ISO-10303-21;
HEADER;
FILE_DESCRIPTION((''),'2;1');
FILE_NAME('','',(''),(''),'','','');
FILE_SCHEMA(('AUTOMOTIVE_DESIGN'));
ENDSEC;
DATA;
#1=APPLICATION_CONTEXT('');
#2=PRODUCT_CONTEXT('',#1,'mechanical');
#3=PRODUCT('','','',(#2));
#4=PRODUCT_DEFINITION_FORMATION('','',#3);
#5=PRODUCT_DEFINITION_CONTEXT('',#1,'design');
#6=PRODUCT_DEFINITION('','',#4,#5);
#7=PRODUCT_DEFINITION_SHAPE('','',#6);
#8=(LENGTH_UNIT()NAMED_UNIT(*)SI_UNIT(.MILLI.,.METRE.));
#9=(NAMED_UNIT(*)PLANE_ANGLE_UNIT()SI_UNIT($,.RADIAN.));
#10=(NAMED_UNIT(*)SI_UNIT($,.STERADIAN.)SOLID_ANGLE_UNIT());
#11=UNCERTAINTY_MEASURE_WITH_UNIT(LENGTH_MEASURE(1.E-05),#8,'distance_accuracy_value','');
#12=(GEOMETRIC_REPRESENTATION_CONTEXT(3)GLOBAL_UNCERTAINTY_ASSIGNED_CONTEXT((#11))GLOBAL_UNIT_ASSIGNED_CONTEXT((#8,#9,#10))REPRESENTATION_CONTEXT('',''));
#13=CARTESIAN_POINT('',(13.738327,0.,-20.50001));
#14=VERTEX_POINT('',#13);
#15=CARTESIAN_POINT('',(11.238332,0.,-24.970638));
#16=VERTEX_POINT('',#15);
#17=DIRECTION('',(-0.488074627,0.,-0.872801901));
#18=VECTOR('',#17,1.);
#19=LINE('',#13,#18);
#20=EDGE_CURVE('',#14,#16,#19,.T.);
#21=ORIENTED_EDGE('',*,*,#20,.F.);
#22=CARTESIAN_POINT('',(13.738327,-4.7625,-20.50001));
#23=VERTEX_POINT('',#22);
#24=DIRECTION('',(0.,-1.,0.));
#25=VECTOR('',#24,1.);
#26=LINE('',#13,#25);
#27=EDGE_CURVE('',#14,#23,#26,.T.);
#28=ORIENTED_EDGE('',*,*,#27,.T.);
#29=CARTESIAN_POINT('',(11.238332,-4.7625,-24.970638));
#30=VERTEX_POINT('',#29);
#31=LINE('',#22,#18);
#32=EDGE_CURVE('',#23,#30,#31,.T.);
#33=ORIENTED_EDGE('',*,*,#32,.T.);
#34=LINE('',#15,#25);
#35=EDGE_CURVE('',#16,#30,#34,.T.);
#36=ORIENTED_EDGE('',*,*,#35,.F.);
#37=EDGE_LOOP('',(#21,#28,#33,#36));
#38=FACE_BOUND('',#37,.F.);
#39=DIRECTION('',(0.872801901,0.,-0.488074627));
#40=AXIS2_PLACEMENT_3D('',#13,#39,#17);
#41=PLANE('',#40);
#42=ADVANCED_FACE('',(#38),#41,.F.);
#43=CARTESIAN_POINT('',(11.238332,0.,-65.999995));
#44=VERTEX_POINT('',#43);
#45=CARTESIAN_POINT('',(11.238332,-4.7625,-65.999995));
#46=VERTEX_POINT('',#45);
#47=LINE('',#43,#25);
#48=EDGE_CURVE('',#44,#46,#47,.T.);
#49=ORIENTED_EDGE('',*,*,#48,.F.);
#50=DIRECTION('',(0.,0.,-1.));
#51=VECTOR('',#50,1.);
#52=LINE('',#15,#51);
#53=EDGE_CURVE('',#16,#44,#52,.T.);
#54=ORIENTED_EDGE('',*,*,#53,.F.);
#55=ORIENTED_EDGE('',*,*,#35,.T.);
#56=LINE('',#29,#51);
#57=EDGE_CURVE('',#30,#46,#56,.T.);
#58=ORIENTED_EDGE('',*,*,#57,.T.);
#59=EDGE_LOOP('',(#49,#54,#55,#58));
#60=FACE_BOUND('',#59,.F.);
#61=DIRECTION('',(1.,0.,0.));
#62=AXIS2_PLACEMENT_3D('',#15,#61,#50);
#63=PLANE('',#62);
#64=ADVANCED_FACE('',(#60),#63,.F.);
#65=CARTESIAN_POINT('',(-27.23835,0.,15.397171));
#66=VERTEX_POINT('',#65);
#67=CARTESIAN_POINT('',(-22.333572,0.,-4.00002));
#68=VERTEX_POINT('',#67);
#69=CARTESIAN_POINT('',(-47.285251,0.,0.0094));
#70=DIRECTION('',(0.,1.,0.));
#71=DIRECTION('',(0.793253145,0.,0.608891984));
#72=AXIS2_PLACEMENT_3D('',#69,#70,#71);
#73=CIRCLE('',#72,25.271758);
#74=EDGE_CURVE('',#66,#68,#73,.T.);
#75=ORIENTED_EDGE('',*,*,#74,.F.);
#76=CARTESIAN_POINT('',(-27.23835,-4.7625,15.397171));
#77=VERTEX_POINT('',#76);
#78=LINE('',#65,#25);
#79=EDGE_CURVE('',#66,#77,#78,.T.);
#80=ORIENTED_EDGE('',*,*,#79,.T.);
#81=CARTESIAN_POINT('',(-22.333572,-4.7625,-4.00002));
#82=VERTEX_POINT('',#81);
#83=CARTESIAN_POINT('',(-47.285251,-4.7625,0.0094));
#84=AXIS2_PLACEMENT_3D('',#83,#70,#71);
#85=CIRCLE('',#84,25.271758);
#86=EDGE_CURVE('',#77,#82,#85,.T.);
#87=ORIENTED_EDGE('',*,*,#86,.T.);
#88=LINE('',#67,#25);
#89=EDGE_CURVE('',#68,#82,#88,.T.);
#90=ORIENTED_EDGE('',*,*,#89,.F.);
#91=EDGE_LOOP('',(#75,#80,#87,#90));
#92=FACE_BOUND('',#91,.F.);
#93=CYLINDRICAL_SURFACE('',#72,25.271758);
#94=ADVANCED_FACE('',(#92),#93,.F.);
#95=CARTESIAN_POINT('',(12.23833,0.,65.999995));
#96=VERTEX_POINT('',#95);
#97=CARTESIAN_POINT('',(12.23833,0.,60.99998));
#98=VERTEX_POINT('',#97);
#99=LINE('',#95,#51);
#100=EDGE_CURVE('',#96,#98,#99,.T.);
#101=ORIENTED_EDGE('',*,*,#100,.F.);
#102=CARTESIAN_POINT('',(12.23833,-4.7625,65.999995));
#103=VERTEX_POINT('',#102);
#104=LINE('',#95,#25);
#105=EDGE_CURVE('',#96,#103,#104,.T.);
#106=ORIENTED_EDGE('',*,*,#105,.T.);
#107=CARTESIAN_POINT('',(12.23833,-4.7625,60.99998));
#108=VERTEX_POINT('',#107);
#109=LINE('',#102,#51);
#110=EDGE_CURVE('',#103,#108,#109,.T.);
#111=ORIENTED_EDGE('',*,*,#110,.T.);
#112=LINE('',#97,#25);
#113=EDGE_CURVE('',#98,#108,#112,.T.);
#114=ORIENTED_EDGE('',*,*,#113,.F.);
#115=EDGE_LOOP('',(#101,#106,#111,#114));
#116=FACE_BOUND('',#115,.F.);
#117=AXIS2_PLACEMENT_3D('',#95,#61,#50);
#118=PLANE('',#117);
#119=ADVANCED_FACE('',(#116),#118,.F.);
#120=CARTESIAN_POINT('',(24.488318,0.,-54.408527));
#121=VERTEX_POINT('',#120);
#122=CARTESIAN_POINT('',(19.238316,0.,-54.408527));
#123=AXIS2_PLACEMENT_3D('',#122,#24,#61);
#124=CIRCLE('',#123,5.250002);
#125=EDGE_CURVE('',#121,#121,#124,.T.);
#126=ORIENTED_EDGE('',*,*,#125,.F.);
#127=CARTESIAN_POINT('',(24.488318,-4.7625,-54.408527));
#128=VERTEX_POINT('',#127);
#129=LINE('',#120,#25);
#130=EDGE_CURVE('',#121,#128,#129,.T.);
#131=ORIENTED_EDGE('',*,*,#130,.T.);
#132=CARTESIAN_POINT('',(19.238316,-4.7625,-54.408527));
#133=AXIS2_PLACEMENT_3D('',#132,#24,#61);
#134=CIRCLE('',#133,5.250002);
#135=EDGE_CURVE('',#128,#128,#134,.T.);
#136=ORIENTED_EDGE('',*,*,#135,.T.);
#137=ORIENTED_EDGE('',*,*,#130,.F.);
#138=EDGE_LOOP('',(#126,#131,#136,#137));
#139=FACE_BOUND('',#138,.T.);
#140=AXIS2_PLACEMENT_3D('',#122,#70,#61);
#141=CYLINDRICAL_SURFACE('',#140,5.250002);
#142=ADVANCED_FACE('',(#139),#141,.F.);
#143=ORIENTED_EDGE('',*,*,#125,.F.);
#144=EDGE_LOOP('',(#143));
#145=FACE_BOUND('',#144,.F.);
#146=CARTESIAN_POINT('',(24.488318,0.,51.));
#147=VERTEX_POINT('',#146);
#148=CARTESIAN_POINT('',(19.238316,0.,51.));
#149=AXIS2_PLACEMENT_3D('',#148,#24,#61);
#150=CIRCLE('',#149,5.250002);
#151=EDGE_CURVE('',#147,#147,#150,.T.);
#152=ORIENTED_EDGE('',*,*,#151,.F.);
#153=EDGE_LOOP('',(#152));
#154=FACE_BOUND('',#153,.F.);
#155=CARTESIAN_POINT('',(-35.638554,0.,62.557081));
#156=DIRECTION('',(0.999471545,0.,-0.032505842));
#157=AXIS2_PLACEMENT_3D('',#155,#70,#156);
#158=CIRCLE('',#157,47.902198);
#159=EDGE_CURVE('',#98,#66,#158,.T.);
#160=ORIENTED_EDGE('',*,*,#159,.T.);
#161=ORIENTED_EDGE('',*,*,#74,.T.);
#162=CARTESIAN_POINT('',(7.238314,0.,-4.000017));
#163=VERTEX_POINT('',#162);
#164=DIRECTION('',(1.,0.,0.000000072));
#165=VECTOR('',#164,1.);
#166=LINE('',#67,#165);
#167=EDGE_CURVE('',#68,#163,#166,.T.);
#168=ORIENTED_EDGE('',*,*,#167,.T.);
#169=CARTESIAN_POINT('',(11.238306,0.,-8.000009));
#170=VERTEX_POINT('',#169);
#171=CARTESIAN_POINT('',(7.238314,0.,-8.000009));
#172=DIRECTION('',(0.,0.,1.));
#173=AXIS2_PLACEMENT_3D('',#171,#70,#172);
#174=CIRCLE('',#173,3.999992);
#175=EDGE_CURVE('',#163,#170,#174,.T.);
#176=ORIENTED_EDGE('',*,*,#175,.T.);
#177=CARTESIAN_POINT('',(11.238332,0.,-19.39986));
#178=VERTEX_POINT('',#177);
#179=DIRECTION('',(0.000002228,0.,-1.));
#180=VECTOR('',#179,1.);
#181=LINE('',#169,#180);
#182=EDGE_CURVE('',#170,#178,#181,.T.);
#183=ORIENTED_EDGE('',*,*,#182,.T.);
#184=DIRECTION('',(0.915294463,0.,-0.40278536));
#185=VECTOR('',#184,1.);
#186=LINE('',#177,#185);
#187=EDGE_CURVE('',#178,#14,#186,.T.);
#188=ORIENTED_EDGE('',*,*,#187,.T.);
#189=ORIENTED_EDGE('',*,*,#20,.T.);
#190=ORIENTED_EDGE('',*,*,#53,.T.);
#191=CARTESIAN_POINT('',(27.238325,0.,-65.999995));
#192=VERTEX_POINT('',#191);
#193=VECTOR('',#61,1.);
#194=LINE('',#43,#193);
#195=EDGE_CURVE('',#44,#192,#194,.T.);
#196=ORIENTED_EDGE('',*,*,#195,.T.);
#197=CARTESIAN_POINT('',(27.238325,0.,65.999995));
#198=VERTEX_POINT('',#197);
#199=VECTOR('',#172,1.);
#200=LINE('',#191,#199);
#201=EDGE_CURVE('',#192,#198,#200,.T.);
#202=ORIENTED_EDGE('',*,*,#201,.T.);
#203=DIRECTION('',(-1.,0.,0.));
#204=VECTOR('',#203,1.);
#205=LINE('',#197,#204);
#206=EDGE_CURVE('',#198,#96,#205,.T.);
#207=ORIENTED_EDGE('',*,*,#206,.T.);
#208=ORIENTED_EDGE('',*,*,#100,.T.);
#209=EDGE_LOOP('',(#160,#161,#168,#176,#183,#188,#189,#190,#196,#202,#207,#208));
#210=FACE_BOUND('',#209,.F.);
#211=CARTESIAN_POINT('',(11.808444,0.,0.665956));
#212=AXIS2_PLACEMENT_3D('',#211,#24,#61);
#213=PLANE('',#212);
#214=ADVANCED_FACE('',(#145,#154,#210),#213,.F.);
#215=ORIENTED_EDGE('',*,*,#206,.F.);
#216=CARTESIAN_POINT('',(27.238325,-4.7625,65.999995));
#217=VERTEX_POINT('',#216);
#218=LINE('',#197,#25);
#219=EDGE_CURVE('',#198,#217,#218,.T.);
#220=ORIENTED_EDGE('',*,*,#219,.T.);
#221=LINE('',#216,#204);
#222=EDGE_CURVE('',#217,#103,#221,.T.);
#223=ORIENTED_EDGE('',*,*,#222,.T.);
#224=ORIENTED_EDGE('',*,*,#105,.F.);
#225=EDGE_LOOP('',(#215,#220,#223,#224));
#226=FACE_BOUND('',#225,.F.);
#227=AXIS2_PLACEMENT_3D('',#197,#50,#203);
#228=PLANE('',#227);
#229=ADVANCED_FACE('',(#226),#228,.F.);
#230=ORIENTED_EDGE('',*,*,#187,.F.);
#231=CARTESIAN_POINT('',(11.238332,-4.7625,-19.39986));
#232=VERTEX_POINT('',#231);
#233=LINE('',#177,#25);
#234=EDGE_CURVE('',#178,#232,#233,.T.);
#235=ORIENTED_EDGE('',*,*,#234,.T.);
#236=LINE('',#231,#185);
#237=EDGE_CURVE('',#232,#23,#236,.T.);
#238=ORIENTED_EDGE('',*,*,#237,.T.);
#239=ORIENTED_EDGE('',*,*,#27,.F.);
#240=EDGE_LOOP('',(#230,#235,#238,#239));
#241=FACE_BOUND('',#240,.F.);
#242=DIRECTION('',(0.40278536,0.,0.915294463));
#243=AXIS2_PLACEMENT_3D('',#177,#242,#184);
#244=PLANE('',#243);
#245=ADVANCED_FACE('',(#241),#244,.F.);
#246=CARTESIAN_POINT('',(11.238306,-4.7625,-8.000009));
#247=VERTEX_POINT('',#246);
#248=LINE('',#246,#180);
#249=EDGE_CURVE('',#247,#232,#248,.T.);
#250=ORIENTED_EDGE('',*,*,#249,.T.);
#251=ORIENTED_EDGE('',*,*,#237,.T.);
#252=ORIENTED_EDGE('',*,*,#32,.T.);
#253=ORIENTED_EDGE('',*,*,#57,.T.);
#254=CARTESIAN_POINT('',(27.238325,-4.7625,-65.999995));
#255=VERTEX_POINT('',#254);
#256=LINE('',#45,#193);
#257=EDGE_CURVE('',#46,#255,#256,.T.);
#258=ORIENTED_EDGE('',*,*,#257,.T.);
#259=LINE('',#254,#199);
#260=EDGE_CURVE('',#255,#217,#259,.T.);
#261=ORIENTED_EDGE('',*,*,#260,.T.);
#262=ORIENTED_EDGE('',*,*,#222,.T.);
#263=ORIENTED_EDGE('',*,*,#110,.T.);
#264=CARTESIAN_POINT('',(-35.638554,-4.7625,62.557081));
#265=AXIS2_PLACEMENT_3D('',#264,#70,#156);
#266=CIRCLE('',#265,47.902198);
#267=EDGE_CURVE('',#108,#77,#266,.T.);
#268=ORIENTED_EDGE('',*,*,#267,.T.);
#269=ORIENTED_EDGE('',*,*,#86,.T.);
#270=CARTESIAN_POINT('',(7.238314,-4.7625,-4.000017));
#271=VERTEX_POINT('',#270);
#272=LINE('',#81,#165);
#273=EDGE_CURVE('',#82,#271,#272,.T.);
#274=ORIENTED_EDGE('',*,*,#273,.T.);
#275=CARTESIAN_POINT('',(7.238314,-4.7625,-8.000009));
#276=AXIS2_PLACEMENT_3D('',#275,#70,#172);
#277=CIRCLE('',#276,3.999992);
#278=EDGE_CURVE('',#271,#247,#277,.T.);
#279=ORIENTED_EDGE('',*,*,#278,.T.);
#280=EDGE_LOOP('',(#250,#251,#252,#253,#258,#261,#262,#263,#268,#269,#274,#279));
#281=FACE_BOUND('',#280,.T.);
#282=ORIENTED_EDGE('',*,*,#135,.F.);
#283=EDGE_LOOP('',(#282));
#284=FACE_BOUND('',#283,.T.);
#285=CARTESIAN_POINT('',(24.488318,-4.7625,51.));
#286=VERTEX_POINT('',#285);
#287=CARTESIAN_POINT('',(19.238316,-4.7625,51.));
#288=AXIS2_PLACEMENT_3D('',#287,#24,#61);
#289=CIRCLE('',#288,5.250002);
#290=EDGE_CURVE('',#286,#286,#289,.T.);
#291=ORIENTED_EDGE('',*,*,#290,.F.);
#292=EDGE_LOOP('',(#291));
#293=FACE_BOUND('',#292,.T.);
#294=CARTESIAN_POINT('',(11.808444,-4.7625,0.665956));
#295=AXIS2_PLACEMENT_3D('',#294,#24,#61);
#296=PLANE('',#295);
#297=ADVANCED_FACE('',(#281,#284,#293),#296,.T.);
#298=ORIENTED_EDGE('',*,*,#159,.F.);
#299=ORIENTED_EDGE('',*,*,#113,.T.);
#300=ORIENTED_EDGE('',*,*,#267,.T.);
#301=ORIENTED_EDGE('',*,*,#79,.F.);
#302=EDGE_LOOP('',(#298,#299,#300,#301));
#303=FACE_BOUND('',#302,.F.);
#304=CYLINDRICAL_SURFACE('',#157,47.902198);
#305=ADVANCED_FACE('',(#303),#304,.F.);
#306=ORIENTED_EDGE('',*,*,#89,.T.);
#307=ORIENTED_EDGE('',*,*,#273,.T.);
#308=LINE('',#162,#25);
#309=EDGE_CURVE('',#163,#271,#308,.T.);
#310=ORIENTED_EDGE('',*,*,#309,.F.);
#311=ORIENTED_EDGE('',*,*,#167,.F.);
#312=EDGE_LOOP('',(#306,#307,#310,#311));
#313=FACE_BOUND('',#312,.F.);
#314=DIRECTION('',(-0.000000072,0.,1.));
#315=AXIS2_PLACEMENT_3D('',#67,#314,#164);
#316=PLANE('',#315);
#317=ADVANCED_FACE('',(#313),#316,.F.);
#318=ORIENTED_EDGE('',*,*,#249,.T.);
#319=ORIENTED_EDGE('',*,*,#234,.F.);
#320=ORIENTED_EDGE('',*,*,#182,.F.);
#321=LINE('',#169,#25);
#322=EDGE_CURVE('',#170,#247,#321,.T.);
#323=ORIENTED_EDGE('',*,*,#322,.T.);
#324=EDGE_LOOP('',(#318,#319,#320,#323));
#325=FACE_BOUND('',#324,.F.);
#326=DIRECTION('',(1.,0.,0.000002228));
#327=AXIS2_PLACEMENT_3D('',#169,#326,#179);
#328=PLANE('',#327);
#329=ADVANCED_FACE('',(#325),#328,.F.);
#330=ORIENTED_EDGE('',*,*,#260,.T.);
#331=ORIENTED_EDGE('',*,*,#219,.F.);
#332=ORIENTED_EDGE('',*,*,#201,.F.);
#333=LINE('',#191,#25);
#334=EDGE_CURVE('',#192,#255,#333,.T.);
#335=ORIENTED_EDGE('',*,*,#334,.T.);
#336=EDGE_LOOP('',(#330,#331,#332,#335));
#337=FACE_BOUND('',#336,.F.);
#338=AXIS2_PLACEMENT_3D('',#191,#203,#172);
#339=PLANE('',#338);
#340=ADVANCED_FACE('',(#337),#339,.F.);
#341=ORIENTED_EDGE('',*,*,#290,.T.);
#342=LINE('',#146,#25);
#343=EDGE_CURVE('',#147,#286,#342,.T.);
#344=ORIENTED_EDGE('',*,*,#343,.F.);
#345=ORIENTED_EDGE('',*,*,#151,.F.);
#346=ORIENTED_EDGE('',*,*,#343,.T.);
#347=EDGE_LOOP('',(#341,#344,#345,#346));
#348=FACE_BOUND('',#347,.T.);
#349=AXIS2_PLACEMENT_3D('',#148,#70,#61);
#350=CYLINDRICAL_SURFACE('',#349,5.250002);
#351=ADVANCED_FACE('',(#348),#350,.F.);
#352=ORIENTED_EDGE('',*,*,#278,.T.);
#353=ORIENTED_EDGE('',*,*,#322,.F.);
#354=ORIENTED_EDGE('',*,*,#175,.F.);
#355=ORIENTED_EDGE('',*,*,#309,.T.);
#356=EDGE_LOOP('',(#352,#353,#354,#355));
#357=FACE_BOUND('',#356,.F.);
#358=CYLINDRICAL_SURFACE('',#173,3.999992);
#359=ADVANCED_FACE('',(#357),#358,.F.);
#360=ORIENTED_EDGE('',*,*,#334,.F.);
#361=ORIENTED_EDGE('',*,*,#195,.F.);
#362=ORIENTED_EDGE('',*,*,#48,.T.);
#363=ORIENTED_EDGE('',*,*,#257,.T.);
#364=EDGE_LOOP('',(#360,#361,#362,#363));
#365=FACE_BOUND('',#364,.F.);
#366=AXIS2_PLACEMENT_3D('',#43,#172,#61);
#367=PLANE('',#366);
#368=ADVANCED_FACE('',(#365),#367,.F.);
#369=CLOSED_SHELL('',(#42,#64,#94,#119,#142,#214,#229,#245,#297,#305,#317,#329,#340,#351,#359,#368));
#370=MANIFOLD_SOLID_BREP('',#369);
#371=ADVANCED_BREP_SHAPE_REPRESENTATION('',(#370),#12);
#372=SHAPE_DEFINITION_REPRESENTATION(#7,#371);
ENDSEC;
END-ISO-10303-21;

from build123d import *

# Parameters (mm, degrees)
F0_R     = 5.2500022
F1_DEPTH = 4.7625


# Not quite as in the source:
# - ends of sketch curves that miss each other by under 0.0002 mm in the source are joined


with BuildPart() as f1:
    # F0 (on Front) → F1 (new body)
    with BuildSketch(Plane.XZ):
        with BuildLine():
            Line((12.2383296, 65.999995), (12.2383296, 60.9999796))
            ThreePointArc((12.2383296, 60.9999796), (0.5785907755, 31.2052232969), (-27.2383496091, 15.3971707597))
            ThreePointArc((-27.2383496091, 15.3971707597), (-22.7846228753, 6.2046372562), (-22.3335718073, -4.0000195199))
            Line((-22.3335718073, -4.0000195199), (7.2383142, -4.0000174))
            ThreePointArc((7.2383142, -4.0000174), (10.0667356679, -5.1715879321), (11.2383062, -8.0000094))
            Line((11.2383062, -8.0000094), (11.2383316, -19.3998596))
            Line((11.2383316, -19.3998596), (13.7383266, -20.5000098))
            Line((13.7383266, -20.5000098), (11.2383316, -24.9706384))
            Line((11.2383316, -24.9706384), (11.2383316, -65.999995))
            Line((11.2383316, -65.999995), (27.238325, -65.999995))
            Line((27.238325, -65.999995), (27.238325, 65.999995))
            Line((27.238325, 65.999995), (12.2383296, 65.999995))
        make_face()
        with Locations((19.2383156, -54.4085272)):
            Circle(F0_R, mode=Mode.SUBTRACT)
        with Locations((19.2383156, 50.9999996)):
            Circle(F0_R, mode=Mode.SUBTRACT)
    extrude(amount=F1_DEPTH)


solid = f1.part
